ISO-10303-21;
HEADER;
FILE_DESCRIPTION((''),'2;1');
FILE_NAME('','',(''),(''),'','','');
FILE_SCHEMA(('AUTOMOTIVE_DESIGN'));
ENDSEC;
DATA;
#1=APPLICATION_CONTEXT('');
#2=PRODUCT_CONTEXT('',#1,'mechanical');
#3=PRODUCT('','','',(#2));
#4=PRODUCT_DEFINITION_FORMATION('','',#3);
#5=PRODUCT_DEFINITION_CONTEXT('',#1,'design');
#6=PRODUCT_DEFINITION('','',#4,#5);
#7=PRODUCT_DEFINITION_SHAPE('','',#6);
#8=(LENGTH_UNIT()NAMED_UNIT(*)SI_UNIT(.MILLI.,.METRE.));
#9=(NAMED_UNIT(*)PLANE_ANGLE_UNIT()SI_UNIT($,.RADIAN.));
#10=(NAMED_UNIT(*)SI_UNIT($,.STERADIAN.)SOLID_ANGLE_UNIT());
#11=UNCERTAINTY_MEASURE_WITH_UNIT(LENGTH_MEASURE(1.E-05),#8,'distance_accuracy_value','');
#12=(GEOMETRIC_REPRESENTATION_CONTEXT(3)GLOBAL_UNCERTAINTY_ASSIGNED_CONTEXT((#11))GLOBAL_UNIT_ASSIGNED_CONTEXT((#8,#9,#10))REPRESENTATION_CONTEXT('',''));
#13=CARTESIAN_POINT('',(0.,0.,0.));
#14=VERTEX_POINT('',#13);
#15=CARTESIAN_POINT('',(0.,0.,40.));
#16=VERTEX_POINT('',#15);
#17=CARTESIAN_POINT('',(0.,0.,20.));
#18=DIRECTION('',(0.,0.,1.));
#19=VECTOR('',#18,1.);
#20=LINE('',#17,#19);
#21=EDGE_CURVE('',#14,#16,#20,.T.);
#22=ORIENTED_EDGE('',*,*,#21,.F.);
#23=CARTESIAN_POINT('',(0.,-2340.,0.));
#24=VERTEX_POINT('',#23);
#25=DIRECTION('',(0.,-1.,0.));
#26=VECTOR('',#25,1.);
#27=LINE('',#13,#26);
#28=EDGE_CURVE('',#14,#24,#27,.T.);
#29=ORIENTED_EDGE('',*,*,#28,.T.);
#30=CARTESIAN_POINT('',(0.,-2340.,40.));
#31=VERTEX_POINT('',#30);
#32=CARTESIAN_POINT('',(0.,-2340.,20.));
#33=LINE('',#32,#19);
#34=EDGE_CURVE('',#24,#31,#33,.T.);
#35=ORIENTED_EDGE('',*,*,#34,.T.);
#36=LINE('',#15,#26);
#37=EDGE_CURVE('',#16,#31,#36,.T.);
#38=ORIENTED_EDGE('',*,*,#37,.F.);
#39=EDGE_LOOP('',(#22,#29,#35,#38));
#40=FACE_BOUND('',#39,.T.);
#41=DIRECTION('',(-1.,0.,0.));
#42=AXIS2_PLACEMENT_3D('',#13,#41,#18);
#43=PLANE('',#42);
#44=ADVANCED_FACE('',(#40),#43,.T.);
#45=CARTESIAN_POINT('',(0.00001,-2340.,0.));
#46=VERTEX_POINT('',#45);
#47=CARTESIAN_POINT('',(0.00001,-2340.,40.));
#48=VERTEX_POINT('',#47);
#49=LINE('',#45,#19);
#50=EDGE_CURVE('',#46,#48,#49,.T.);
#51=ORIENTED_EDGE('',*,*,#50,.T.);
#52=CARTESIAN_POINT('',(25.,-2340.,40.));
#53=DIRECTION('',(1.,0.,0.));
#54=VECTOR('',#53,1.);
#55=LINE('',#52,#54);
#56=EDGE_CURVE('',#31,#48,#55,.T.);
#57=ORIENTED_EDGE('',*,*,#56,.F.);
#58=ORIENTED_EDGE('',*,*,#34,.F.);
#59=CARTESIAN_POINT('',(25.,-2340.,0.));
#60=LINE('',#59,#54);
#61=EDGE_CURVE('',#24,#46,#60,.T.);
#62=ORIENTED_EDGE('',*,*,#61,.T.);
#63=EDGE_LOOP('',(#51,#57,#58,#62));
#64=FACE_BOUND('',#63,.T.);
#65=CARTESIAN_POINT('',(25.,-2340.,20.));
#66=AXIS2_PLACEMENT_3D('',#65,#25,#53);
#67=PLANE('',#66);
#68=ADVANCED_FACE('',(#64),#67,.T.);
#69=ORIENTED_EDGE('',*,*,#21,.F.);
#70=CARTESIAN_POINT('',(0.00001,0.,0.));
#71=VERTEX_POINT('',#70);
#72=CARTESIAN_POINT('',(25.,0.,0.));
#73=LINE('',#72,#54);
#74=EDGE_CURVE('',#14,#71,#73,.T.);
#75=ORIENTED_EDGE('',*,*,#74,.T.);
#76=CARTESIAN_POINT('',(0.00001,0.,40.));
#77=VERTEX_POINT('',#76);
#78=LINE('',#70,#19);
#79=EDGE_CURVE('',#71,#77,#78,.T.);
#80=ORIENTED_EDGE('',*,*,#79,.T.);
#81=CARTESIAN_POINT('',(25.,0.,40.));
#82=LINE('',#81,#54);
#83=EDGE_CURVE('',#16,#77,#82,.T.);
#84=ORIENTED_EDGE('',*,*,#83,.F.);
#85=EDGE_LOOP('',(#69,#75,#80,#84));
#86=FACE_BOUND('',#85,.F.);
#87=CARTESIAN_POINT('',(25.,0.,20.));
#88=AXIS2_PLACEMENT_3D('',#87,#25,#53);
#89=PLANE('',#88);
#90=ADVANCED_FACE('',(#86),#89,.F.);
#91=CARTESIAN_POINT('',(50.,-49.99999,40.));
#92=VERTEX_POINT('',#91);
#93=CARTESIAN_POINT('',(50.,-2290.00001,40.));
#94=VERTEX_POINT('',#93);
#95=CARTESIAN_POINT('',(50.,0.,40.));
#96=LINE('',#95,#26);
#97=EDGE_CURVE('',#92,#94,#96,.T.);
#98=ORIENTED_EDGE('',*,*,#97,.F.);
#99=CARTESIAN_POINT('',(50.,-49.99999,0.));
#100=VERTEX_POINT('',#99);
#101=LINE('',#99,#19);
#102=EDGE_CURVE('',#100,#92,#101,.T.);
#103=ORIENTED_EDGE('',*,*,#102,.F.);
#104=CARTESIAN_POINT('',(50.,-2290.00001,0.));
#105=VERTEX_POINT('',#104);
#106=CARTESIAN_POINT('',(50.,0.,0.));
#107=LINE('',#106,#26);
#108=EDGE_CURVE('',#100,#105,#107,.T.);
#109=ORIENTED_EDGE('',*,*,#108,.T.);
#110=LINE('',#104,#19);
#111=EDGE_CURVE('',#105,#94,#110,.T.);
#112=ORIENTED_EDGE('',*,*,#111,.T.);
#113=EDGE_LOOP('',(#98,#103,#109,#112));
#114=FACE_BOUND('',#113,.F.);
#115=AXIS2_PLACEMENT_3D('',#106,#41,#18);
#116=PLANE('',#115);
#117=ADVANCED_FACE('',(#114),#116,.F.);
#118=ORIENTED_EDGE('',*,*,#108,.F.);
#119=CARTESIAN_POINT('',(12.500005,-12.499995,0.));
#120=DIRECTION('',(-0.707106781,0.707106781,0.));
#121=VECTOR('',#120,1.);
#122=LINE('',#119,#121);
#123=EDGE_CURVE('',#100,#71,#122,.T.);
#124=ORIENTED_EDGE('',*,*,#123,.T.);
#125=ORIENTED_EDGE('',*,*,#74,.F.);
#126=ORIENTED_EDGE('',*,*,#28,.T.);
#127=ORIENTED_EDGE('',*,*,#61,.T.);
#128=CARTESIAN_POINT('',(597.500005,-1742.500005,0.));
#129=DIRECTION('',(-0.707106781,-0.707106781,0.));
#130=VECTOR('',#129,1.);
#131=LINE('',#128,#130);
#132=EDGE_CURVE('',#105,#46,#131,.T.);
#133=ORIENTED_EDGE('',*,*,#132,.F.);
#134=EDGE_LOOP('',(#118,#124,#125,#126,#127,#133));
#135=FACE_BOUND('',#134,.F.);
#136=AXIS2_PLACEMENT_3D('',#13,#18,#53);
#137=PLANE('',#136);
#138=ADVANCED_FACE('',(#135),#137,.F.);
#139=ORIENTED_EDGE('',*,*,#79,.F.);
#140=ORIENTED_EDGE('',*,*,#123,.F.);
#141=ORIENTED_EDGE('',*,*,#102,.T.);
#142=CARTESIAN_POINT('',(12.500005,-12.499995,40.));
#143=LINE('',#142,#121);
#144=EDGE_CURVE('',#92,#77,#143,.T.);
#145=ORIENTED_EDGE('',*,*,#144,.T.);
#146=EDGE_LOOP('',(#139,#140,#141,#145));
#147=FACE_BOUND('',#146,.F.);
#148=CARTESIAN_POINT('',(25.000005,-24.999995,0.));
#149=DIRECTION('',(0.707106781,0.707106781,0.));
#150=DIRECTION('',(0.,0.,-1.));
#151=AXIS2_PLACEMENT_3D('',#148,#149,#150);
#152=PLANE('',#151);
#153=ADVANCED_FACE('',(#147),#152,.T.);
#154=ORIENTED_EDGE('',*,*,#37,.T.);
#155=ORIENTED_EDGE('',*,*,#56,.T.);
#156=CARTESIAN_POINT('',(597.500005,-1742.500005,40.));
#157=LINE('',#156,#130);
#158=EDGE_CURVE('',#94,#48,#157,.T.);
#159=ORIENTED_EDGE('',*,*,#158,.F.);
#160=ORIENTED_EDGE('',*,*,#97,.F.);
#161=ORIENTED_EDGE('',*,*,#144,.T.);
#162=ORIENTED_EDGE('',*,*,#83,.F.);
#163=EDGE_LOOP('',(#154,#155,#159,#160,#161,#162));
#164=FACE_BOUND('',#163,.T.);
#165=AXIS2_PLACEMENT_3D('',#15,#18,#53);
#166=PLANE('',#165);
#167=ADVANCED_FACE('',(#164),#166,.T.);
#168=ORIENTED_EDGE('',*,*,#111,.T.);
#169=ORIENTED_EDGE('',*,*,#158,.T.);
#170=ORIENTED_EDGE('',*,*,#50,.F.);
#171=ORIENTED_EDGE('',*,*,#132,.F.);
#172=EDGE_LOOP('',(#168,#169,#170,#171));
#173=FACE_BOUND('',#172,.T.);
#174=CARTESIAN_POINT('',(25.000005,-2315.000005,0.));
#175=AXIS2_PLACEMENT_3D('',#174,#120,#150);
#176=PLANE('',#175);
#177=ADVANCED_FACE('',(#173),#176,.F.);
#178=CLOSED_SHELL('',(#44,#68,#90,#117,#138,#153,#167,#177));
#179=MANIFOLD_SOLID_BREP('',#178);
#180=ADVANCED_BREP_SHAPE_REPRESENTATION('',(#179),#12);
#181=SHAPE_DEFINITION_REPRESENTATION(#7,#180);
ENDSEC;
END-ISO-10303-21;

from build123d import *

# Parameters (mm, degrees)
F0_W     = 50
F0_H     = 40
F1_DEPTH = 2340
F2_SIZE2 = 49.99999
F2_SIZE  = 49.99999


# Not quite as in the source:
# - a fillet or chamfer is up to 0.001 mm smaller than in the source, because OpenCascade refuses the exact size


with BuildPart() as f1:
    # F0 (on Front) → F1 (new body)
    with BuildSketch(Plane.XZ):
        with Locations((25, 20)):
            Rectangle(F0_W, F0_H)
    extrude(amount=F1_DEPTH)

    # F2 (size 50 and 50 in the source; OpenCascade refuses exactly that, so slightly less here)
    f2_edges = [f1.edges().sort_by_distance(p)[0] for p in [
        (50, 0, 20),
        (50, -2340, 20),
    ]]
    chamfer(f2_edges, length=F2_SIZE, length2=F2_SIZE2)


solid = f1.part
